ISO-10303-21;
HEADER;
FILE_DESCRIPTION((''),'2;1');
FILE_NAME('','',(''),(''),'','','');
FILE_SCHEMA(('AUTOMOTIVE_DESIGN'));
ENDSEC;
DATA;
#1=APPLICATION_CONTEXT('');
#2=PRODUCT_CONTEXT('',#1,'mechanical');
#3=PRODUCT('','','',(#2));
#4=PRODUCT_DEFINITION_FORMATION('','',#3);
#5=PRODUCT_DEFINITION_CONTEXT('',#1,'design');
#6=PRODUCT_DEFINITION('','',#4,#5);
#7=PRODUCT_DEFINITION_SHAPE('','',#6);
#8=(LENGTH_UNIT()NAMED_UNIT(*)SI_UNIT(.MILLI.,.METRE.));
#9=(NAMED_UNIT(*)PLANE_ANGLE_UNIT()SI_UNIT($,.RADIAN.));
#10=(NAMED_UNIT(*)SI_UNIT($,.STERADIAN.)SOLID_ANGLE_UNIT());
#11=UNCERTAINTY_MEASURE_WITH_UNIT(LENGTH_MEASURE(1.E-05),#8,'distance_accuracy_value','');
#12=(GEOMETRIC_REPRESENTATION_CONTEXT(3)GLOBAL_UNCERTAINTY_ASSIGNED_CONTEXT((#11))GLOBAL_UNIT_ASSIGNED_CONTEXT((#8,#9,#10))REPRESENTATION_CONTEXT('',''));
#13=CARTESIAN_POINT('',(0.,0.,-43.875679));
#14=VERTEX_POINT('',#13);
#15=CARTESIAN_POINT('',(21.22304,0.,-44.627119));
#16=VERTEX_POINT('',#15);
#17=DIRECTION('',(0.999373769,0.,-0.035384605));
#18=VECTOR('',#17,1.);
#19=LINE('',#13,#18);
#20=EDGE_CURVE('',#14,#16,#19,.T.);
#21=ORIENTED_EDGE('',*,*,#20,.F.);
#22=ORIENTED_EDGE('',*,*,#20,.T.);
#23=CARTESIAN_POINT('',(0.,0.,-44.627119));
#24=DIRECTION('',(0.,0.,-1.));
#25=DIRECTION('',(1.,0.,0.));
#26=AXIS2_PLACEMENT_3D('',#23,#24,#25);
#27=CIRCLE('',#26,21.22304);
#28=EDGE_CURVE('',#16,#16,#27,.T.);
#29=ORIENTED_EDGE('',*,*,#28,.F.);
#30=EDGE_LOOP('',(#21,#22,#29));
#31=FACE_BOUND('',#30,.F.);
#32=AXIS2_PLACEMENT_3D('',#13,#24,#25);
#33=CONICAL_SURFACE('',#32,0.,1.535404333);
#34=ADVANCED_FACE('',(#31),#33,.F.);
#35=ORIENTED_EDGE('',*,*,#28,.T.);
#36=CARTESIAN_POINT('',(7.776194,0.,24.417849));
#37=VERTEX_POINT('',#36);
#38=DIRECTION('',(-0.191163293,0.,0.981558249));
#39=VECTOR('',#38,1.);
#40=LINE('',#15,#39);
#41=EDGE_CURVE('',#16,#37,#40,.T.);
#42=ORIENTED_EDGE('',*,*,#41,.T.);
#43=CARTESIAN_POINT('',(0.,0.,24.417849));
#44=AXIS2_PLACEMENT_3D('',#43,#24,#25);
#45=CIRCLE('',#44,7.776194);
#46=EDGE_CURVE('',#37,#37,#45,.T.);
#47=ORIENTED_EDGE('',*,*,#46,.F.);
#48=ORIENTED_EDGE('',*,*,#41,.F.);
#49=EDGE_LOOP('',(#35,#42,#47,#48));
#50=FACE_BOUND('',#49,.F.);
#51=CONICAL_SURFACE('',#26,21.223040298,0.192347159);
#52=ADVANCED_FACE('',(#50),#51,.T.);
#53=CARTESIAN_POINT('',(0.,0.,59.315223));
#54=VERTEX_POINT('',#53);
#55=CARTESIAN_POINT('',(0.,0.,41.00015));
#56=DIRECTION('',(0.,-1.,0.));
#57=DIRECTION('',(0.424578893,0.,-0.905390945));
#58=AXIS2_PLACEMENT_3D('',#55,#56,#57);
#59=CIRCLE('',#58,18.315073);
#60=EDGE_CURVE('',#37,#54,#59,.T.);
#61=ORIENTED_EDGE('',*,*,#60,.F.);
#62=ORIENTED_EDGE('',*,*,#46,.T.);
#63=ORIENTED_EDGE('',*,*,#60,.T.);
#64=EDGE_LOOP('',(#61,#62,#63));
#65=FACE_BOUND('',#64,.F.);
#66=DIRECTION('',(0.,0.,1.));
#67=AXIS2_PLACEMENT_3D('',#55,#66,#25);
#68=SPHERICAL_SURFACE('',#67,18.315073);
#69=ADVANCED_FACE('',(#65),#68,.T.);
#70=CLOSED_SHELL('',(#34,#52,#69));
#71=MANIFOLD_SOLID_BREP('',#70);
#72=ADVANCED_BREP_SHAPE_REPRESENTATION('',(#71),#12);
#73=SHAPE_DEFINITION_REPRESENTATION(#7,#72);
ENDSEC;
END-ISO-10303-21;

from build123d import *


# Not quite as in the source:
# - a feature names something its author has since deleted; it is built from what else it names


with BuildPart() as f1:
    # F0 (on Front) → F1 (revolve)
    with BuildSketch(Plane.XZ):
        with BuildLine():
            Line((21.2230402976, -44.6271188557), (7.7761935474, 24.4178486332))
            ThreePointArc((7.7761935474, 24.4178486332), (17.8766324697, 44.9836060593), (0, 59.3152234305))
            Line((0, 59.3152234305), (0, 22.6850768577))
            Line((0, 22.6850768577), (0, -43.8756793737))
            Line((0, -43.8756793737), (21.2230402976, -44.6271188557))
        make_face()
    revolve(axis=Axis((0, 0, -10.595301258), (0, 0, -1)))


solid = f1.part
